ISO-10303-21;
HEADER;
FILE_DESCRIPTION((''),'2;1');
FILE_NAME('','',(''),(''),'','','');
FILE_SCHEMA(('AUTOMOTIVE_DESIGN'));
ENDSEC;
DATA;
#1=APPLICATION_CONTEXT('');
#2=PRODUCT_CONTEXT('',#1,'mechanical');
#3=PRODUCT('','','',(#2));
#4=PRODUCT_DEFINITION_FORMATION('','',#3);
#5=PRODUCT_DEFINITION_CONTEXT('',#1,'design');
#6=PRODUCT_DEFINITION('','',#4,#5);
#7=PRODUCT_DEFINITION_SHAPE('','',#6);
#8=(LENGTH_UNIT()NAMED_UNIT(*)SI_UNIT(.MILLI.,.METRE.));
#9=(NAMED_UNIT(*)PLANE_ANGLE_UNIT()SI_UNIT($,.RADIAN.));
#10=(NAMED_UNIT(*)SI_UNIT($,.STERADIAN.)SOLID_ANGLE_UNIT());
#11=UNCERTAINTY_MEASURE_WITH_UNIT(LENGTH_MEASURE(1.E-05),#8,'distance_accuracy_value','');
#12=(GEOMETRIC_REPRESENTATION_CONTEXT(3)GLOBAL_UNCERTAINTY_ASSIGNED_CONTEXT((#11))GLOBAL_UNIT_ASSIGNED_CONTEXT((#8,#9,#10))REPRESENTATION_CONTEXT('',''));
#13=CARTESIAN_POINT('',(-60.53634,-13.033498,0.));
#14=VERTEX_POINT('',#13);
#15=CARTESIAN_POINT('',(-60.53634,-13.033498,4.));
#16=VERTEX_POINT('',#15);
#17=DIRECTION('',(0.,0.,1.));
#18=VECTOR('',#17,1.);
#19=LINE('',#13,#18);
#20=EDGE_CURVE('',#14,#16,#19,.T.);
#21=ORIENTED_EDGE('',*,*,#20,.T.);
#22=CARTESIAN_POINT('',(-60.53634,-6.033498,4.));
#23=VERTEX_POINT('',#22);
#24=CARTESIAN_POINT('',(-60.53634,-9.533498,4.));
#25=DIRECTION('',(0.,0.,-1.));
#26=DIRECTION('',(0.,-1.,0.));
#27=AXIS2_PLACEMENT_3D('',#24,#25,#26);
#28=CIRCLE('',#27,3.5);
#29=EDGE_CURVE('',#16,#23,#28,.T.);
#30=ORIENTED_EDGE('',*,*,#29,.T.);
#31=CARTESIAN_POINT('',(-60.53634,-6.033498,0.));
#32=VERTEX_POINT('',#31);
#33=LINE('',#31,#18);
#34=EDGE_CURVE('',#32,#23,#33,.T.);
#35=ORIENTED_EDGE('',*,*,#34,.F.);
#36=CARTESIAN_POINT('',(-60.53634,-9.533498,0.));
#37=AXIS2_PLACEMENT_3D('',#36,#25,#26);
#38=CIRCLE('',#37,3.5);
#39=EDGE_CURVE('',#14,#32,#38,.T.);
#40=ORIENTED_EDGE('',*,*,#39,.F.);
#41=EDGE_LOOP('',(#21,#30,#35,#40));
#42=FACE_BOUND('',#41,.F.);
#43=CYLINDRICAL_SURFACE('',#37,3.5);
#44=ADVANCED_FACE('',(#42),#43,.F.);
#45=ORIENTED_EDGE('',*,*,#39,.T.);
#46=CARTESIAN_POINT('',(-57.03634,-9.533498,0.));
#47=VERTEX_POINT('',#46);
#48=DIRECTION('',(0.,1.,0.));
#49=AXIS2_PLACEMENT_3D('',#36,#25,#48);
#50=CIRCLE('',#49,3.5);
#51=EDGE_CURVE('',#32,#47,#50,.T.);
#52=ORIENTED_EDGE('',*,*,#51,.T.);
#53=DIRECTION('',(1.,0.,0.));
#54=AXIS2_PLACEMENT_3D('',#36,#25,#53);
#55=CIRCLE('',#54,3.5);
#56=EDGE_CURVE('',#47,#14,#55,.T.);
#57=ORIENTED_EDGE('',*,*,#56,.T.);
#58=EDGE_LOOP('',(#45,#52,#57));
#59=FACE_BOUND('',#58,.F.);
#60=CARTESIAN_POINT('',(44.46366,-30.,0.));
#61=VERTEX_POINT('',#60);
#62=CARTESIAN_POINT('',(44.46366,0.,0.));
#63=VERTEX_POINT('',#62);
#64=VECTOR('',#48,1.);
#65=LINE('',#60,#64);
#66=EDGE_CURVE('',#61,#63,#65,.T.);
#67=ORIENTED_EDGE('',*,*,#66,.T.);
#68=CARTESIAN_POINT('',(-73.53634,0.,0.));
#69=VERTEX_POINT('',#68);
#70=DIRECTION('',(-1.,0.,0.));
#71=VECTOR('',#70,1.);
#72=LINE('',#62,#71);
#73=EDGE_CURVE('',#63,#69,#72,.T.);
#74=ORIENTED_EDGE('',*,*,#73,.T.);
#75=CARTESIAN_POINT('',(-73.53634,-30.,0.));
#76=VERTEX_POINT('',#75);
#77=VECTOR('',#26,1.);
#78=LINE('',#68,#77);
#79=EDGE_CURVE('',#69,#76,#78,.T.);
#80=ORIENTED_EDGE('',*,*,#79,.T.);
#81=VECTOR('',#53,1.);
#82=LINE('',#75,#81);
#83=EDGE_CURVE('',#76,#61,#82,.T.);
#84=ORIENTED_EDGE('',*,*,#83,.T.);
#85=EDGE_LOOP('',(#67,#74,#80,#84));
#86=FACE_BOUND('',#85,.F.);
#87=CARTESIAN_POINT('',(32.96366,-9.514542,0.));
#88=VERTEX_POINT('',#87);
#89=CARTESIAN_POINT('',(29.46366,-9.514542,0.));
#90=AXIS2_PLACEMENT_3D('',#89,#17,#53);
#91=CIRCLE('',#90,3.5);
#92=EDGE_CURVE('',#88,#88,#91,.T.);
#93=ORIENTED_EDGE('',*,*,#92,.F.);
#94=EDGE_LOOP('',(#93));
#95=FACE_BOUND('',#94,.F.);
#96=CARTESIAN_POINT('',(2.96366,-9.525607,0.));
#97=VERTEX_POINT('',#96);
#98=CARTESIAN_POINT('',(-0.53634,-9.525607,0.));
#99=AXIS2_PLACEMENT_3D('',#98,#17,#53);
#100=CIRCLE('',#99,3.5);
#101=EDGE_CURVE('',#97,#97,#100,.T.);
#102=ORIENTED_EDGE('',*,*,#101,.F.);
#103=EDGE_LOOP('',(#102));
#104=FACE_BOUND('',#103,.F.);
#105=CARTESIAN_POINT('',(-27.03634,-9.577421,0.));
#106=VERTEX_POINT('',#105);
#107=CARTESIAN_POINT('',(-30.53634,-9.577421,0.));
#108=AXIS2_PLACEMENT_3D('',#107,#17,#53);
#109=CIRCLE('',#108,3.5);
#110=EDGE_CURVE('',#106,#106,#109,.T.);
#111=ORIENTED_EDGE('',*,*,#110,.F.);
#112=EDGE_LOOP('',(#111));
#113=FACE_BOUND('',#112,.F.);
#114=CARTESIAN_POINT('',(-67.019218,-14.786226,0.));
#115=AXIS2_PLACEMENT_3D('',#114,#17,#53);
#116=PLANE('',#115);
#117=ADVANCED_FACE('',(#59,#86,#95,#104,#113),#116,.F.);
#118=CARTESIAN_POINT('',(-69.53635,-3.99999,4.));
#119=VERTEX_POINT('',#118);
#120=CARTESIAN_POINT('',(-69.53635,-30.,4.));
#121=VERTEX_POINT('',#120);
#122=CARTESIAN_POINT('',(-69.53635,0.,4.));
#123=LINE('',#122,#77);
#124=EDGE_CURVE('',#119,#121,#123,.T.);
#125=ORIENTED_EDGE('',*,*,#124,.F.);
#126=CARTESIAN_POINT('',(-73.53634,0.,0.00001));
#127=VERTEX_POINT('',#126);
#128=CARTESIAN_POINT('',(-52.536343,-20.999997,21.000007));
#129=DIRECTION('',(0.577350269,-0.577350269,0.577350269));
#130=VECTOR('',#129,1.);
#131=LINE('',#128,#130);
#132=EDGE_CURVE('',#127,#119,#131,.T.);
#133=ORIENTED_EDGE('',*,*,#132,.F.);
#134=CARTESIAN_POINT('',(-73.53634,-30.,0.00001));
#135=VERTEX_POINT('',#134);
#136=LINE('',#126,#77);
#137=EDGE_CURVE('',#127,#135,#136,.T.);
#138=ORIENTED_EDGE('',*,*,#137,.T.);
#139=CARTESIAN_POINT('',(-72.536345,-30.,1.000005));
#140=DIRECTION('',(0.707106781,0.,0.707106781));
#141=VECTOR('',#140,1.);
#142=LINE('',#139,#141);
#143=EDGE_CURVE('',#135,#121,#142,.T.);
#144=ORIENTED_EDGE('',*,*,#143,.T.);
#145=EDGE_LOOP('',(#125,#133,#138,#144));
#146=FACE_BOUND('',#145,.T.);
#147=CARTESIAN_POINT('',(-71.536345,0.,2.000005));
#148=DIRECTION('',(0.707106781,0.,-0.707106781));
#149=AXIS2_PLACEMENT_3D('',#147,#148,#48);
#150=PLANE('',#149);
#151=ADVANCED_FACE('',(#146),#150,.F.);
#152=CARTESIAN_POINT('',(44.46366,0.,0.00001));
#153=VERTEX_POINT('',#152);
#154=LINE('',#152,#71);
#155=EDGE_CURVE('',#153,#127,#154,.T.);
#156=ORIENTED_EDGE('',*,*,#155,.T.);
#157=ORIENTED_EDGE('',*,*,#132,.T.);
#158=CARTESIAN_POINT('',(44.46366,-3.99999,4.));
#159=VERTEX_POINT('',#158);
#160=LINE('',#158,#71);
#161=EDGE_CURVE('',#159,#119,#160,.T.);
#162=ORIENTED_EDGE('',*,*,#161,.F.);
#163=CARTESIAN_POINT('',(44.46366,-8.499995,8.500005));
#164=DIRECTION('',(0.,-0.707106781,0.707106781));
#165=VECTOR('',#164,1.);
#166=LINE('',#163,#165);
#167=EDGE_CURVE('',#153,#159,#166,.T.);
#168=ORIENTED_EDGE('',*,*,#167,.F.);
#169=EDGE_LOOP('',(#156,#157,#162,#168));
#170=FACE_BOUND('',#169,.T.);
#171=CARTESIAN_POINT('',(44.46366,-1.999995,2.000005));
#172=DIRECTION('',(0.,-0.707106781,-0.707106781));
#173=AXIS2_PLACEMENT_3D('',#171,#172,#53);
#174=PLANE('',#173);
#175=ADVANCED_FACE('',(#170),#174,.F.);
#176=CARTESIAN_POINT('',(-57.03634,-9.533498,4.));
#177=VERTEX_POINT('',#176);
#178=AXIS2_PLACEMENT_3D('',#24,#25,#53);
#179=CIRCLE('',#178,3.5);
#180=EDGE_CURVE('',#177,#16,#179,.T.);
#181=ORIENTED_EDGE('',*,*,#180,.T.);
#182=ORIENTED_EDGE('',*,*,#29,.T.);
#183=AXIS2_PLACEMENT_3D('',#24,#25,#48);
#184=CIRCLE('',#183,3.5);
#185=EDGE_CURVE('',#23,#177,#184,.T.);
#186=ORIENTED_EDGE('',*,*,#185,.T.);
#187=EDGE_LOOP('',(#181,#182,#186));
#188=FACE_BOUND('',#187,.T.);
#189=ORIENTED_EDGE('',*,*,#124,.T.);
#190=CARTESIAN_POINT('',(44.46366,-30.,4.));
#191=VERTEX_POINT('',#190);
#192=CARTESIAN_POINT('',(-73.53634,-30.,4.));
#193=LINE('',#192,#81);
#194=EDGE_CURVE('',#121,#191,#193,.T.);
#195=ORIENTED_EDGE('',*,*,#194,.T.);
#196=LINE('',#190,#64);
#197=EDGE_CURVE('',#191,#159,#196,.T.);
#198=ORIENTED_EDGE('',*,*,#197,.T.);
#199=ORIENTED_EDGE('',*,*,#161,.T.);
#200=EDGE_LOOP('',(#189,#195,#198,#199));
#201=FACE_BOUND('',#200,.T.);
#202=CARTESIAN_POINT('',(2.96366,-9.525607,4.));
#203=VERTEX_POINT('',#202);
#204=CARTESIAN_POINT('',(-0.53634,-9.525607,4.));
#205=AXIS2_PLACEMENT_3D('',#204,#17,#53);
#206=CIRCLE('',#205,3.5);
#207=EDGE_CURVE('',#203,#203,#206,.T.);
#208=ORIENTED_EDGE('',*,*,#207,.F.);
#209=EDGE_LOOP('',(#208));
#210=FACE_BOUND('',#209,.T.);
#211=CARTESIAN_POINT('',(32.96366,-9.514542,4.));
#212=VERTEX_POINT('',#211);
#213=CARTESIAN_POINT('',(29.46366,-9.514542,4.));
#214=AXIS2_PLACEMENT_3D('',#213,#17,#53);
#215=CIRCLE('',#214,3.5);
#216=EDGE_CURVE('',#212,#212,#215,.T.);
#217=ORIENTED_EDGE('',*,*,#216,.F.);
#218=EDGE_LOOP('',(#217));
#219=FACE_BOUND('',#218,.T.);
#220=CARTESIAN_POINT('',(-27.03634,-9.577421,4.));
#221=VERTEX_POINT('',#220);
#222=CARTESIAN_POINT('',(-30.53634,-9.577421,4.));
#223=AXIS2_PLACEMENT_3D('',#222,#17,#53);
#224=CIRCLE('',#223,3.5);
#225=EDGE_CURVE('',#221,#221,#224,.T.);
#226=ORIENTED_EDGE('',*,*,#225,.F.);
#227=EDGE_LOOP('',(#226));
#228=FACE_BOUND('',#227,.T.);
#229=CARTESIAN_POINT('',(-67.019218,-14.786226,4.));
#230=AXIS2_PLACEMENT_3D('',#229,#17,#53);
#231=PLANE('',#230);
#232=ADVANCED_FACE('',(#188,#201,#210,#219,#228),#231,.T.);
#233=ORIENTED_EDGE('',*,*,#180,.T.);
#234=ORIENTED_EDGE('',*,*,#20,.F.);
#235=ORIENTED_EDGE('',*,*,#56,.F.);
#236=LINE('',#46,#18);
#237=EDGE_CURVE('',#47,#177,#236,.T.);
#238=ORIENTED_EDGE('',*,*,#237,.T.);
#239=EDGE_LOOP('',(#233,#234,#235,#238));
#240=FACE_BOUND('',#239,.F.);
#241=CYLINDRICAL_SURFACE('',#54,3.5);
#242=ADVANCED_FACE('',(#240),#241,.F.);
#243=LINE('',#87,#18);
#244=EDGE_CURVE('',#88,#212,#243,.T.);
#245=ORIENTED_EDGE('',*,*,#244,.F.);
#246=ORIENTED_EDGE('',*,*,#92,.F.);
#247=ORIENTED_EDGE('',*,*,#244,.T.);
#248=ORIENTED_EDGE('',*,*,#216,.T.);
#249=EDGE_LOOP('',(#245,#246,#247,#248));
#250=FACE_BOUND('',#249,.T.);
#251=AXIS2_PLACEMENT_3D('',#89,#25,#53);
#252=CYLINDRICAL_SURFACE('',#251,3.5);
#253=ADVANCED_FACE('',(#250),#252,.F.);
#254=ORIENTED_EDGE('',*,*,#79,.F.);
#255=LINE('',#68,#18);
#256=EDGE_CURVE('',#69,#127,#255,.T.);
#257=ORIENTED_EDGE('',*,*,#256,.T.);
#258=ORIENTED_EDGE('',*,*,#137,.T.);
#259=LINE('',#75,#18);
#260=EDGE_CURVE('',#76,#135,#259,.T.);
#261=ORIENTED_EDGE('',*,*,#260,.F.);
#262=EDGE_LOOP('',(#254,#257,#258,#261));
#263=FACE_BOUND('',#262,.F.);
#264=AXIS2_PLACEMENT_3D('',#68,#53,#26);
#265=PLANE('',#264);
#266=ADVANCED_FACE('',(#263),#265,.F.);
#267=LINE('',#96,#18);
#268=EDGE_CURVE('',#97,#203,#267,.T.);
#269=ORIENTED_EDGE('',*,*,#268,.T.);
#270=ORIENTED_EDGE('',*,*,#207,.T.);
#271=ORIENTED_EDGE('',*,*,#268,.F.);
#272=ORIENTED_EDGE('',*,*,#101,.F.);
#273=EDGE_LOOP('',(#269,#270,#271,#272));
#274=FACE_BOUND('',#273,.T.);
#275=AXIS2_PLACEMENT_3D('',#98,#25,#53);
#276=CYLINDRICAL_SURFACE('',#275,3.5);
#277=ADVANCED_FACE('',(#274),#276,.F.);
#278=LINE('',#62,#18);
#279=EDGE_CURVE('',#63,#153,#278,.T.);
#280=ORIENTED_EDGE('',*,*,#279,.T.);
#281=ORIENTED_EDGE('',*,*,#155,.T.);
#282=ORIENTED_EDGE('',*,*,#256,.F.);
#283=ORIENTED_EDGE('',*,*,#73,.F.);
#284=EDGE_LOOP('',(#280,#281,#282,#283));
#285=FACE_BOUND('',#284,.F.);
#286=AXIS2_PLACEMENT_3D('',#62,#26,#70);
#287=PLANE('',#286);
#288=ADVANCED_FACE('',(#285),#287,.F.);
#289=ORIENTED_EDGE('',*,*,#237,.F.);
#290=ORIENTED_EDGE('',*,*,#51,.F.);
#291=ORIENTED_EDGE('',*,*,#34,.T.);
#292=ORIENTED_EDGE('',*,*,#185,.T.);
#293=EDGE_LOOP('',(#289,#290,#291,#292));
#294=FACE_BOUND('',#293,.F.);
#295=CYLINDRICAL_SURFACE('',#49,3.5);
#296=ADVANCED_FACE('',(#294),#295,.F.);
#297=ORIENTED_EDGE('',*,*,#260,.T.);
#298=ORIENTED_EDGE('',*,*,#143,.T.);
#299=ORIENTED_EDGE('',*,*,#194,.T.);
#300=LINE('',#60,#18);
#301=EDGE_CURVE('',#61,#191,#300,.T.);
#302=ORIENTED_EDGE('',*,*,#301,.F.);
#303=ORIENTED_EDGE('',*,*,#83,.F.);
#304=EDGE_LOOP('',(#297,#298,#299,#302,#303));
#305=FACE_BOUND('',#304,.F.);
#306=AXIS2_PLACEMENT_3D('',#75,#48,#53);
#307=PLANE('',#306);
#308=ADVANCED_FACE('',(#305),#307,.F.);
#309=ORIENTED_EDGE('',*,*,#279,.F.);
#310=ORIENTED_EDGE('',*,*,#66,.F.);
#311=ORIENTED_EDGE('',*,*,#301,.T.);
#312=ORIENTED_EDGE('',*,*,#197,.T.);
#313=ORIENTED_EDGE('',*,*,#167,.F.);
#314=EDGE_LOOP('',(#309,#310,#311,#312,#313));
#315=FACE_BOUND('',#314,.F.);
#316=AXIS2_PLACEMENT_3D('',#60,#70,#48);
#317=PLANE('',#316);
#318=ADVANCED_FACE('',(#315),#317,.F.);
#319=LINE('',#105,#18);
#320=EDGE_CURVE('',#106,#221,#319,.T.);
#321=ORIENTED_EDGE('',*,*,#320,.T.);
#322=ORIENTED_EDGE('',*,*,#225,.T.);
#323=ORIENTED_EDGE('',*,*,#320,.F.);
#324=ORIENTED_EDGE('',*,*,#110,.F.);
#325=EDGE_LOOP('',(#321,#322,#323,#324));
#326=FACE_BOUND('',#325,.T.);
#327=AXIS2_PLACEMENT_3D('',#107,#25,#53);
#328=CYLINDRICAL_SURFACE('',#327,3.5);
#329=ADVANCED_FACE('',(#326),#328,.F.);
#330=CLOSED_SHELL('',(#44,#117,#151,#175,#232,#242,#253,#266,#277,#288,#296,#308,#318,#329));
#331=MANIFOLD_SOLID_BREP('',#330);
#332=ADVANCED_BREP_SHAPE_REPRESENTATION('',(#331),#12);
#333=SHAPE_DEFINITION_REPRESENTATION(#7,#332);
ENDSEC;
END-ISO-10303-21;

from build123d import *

# Parameters (mm, degrees)
F0_R     = 3.5
F1_DEPTH = 4
F2_SIZE  = 3.99999


# Not quite as in the source:
# - a fillet or chamfer is up to 0.001 mm smaller than in the source, because OpenCascade refuses the exact size


with BuildPart() as f1:
    # F0 (on Top) → F1 (new body)
    with BuildSketch(Plane.XY):
        with BuildLine():
            Line((-60.536339879, 0), (-73.536339879, 0))
            Line((-73.536339879, 0), (-73.536339879, -4))
            Line((-73.536339879, -4), (-73.536339879, -30))
            Line((-73.536339879, -30), (-60.536339879, -30))
            Line((-60.536339879, -30), (-60.536339879, -13.0334984362))
            ThreePointArc((-60.536339879, -13.0334984362), (-64.036339879, -9.5334984362), (-60.536339879, -6.0334984362))
            Line((-60.536339879, -6.0334984362), (-60.536339879, 0))
        make_face()
        with BuildLine():
            Line((44.463660121, 0), (-60.536339879, 0))
            Line((-60.536339879, 0), (-60.536339879, -6.0334984362))
            ThreePointArc((-60.536339879, -6.0334984362), (-58.0614661449, -7.0586247021), (-57.036339879, -9.5334984362))
            ThreePointArc((-57.036339879, -9.5334984362), (-58.0614661449, -12.0083721704), (-60.536339879, -13.0334984362))
            Line((-60.536339879, -13.0334984362), (-60.536339879, -30))
            Line((-60.536339879, -30), (-52.7029968798, -30))
            Line((-52.7029968798, -30), (44.463660121, -30))
            Line((44.463660121, -30), (44.463660121, 0))
        make_face()
        with Locations((-30.536339879, -9.5774214715)):
            Circle(F0_R, mode=Mode.SUBTRACT)
        with Locations((-0.536339879, -9.52560734)):
            Circle(F0_R, mode=Mode.SUBTRACT)
        with Locations((29.463660121, -9.5145422965)):
            Circle(F0_R, mode=Mode.SUBTRACT)
    extrude(amount=F1_DEPTH)

    # F2 (size 4 in the source; OpenCascade refuses exactly that, so slightly less here)
    f2_edges = [f1.edges().sort_by_distance(p)[0] for p in [
        (-73.53634, -15, 4),
        (-14.53634, 0, 4),
    ]]
    chamfer(f2_edges, length=F2_SIZE)


solid = f1.part
